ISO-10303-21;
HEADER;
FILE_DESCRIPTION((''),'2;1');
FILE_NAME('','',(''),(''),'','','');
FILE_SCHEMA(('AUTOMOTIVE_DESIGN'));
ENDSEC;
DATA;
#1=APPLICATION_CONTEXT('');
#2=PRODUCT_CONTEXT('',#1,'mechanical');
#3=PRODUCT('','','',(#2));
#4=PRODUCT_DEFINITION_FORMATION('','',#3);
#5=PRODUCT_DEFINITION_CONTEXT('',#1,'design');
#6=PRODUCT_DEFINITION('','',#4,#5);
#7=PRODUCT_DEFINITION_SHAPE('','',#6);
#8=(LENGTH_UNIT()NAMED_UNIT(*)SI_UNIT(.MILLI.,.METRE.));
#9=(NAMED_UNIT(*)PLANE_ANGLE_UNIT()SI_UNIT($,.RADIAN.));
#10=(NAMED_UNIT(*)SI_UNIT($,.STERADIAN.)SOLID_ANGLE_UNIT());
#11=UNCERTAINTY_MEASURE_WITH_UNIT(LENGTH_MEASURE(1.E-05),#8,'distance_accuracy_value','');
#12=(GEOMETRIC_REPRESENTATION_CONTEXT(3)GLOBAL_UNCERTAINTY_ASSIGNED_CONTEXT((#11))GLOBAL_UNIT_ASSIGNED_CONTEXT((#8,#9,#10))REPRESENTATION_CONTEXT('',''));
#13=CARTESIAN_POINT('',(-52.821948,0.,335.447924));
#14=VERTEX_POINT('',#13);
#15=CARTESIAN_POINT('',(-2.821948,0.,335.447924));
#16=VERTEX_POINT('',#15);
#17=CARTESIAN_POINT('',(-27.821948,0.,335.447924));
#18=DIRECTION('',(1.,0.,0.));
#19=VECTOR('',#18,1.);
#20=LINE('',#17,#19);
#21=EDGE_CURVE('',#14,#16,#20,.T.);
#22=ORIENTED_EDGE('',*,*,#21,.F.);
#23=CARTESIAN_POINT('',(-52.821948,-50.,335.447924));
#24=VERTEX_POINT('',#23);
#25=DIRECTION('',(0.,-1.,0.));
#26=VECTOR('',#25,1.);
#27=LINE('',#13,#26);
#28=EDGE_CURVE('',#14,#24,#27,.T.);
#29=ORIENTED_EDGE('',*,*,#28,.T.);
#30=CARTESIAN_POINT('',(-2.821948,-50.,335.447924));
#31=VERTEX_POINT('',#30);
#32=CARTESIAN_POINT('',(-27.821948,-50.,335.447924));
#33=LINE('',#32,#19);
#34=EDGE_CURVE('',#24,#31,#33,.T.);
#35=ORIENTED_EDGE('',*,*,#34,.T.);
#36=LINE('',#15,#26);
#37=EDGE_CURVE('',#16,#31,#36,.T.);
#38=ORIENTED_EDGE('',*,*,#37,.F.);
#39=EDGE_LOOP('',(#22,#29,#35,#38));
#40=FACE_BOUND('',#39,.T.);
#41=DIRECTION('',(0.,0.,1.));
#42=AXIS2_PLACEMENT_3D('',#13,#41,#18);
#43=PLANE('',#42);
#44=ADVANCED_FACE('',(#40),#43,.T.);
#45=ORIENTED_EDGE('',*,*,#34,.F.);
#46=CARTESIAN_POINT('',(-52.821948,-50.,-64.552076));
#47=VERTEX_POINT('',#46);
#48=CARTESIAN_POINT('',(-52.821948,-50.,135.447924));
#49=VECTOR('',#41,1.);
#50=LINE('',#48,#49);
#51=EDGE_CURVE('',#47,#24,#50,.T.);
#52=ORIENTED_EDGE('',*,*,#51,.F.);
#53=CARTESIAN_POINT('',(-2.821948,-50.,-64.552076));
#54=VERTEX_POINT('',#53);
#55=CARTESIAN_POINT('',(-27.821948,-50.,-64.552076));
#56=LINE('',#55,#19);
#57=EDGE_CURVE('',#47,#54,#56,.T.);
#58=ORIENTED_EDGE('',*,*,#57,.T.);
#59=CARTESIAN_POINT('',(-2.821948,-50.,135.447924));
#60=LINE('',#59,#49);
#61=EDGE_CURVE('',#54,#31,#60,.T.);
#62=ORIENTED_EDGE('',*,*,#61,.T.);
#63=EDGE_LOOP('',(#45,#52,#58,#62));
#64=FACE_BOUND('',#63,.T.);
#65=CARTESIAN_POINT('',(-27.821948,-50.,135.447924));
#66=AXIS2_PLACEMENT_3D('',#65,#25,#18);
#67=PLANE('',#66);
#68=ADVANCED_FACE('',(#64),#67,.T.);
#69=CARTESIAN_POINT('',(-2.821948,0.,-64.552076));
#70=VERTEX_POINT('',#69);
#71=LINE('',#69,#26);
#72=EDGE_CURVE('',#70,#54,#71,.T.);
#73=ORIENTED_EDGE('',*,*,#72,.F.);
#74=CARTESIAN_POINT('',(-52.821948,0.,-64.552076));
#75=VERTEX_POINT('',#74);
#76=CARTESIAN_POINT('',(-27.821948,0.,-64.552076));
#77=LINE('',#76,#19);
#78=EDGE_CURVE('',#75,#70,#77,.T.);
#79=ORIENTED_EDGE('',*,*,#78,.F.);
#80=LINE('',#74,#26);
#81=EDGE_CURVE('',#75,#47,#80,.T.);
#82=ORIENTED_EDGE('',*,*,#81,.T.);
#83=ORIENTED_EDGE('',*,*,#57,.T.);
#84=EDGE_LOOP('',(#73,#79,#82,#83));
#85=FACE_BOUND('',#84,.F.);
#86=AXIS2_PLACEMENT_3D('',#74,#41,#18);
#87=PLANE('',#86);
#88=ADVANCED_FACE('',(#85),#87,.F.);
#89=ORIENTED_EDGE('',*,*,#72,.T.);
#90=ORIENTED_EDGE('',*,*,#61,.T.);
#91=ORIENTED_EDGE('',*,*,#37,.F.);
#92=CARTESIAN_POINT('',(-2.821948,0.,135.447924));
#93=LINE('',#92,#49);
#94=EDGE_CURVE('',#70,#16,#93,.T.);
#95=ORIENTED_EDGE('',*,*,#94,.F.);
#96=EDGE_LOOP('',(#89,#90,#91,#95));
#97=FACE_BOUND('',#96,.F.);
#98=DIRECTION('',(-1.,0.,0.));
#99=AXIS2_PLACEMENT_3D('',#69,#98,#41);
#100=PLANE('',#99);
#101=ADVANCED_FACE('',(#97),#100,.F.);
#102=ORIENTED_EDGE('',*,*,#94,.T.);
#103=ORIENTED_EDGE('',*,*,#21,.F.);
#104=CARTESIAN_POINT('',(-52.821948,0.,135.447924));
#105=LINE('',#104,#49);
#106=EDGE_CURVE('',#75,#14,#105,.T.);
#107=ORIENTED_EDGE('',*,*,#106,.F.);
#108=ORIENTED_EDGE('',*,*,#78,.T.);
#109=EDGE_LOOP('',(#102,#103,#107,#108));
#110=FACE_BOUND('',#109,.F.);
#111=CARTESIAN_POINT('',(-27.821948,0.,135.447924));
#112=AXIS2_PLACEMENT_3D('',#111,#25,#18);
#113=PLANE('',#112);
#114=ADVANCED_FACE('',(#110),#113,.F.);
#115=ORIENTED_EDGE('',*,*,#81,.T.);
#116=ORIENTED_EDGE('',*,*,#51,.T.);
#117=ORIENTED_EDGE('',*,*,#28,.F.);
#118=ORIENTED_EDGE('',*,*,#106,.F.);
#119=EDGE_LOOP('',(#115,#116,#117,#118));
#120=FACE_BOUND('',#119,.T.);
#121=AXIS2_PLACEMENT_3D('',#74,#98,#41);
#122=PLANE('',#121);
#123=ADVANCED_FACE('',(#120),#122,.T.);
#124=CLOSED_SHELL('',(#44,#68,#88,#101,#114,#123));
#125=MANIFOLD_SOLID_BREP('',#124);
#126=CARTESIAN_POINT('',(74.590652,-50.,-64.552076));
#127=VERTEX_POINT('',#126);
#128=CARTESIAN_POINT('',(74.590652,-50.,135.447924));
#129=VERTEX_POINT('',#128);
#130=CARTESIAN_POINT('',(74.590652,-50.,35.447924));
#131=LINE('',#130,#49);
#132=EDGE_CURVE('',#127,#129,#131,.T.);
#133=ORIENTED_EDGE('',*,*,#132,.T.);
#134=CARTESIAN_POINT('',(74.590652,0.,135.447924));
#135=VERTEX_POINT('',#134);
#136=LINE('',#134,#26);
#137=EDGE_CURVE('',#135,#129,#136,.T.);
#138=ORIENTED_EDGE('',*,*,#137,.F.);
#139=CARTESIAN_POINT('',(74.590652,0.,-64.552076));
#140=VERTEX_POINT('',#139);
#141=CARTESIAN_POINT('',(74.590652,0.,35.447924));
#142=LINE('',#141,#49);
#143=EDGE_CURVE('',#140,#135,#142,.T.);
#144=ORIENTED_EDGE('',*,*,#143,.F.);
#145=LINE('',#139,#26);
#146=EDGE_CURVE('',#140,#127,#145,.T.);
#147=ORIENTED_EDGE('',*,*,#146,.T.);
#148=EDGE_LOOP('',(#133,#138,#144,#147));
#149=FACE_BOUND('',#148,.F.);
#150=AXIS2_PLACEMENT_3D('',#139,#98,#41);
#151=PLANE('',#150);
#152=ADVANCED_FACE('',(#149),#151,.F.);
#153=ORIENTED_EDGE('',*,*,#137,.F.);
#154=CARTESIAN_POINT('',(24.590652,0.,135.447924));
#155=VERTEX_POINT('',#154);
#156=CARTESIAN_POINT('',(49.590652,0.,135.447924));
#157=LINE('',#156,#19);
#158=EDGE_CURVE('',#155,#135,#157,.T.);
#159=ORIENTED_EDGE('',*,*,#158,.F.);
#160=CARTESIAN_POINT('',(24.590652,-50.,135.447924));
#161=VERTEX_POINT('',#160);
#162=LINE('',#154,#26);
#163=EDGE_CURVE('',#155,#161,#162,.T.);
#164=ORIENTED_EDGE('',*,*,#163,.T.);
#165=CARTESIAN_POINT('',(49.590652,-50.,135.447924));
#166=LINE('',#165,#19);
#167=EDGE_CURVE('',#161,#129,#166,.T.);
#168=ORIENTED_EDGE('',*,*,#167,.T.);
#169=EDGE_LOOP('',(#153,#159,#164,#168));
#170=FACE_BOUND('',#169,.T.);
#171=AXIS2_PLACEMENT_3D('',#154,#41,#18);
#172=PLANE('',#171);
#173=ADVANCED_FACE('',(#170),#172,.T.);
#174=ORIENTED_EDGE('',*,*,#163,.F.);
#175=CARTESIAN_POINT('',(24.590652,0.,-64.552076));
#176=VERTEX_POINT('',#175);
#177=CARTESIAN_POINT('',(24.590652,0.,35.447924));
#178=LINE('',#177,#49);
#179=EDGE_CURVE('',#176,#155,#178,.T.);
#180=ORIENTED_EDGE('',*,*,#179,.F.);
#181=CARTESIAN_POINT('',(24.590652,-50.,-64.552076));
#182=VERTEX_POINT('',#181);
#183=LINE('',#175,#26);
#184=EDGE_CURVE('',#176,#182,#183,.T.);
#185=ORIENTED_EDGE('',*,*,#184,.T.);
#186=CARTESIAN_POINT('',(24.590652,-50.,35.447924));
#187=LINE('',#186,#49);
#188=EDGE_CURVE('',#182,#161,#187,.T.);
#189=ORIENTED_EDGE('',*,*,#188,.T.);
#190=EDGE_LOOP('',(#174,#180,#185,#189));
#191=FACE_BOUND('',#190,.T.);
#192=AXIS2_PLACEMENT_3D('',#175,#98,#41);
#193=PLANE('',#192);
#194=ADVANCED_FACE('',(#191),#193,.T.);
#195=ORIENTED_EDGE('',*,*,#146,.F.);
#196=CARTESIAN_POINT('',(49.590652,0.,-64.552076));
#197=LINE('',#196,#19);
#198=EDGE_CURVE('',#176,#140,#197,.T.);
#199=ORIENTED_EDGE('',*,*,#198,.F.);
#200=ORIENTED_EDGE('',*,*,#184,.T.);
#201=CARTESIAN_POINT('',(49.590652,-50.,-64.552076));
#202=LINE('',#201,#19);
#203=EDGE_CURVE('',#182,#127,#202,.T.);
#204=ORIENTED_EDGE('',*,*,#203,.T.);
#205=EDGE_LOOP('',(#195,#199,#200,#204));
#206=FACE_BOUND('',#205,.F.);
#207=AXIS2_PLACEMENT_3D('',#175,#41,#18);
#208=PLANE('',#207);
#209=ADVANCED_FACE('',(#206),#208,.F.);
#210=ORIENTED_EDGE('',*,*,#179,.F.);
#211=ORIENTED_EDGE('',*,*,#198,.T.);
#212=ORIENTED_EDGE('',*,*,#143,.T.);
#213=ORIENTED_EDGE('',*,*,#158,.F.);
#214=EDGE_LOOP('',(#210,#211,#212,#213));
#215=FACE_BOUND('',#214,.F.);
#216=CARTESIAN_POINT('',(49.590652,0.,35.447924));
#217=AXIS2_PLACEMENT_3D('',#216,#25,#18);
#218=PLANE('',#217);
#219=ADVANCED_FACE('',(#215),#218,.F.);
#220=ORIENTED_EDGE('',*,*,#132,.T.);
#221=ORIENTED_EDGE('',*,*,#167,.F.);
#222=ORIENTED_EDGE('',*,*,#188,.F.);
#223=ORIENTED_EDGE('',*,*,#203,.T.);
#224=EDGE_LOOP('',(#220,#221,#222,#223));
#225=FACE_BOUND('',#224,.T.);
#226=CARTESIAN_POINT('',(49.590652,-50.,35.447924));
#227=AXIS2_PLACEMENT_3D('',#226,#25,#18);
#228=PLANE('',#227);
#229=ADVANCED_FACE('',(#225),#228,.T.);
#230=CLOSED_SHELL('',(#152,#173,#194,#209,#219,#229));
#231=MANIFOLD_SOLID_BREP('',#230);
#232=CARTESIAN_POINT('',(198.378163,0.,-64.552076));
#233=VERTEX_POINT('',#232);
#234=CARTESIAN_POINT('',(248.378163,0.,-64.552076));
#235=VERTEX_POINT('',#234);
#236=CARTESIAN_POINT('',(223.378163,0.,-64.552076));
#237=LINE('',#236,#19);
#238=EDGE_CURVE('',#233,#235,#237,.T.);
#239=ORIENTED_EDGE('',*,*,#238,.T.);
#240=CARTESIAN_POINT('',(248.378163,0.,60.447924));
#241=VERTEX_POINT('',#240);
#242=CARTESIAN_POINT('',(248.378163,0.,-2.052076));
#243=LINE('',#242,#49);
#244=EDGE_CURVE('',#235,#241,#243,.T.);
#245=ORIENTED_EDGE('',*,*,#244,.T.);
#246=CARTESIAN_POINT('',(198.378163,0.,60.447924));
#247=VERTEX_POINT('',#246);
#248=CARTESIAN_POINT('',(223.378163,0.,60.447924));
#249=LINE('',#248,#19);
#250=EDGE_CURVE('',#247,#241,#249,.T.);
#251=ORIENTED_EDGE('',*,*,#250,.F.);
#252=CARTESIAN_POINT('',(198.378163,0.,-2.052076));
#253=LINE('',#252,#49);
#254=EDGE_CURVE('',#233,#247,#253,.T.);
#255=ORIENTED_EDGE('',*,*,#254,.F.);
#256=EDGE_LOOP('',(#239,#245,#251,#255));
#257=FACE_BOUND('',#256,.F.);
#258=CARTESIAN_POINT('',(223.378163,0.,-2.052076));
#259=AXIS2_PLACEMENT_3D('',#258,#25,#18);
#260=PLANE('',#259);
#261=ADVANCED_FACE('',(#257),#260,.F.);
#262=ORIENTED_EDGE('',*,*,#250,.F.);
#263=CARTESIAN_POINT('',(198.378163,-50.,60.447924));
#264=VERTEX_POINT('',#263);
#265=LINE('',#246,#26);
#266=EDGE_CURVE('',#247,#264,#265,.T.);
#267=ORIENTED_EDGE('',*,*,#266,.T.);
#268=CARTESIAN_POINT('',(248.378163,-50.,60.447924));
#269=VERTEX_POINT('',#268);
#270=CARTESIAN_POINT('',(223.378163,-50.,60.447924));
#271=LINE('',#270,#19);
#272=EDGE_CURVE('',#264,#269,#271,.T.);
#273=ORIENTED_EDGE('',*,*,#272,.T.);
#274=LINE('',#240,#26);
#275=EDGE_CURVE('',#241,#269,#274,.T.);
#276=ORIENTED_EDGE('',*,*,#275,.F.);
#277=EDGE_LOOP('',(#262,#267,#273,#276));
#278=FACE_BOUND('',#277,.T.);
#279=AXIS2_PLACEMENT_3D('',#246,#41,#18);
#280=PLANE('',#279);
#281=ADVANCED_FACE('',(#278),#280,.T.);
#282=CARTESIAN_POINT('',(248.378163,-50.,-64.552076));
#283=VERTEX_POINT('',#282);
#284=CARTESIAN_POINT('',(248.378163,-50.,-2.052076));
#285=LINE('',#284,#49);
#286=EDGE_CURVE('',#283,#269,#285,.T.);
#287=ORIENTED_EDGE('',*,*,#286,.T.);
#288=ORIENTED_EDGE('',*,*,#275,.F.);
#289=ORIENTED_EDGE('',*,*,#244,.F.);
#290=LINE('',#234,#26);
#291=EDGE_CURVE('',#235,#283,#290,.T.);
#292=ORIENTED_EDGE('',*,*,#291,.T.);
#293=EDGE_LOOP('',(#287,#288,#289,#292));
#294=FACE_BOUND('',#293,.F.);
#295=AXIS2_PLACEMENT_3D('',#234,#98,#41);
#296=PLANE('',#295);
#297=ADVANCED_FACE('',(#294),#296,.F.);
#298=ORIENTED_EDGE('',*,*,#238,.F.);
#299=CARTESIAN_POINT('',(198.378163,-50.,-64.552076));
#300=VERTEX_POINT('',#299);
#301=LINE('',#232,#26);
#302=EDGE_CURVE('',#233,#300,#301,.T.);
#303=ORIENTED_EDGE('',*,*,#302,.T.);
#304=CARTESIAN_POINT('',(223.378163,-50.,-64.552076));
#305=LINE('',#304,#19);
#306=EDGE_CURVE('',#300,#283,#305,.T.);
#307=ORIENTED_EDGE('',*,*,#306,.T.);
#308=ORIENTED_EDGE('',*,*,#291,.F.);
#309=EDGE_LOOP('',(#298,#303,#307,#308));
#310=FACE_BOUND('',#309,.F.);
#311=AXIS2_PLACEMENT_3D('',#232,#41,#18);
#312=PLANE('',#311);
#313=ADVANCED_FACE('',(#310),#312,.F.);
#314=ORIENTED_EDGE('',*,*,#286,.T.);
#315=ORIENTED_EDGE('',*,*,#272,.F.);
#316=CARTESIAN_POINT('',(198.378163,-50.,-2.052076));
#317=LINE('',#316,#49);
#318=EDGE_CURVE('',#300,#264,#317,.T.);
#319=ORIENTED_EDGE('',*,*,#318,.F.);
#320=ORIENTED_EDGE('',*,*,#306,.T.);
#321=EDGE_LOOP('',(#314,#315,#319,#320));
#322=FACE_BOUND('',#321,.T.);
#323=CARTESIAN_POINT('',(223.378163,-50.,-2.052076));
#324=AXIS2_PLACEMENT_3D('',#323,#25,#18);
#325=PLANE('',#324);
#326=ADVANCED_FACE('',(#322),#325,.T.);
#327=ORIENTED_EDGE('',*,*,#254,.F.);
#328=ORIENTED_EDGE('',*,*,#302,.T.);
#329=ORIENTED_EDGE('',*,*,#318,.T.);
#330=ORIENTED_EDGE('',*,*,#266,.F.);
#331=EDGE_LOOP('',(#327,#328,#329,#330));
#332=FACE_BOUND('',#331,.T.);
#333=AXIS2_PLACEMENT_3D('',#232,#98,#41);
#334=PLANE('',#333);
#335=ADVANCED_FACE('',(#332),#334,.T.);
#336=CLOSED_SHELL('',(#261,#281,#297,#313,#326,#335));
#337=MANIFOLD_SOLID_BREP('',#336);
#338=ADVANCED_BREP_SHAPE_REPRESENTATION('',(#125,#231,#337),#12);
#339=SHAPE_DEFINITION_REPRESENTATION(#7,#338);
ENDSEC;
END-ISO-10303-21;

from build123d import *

# Parameters (mm, degrees)
F0_W     = 50
F0_H     = 400
F1_DEPTH = 50
F0_H_2   = 200
F0_H_3   = 125


# Not quite as in the source:
# - a feature names something its author has since deleted; it is built from what else it names


with BuildPart() as f1:
    # F0 (on Front) → F1 (new body)
    with BuildSketch(Plane.XZ):
        with Locations((-27.8219481464, 135.4479238391)):
            Rectangle(F0_W, F0_H)
    extrude(amount=F1_DEPTH)


with BuildPart() as f1b:
    # F0 (on Front) → F1, piece 2 (new body)
    with BuildSketch(Plane.XZ):
        with Locations((49.590652436, 35.4479238391)):
            Rectangle(F0_W, F0_H_2)
    extrude(amount=F1_DEPTH)


with BuildPart() as f1c:
    # F0 (on Front) → F1, piece 3 (new body)
    with BuildSketch(Plane.XZ):
        with Locations((223.378162575, -2.0520761609)):
            Rectangle(F0_W, F0_H_3)
    extrude(amount=F1_DEPTH)


solid = Compound([f1.part, f1b.part, f1c.part])
